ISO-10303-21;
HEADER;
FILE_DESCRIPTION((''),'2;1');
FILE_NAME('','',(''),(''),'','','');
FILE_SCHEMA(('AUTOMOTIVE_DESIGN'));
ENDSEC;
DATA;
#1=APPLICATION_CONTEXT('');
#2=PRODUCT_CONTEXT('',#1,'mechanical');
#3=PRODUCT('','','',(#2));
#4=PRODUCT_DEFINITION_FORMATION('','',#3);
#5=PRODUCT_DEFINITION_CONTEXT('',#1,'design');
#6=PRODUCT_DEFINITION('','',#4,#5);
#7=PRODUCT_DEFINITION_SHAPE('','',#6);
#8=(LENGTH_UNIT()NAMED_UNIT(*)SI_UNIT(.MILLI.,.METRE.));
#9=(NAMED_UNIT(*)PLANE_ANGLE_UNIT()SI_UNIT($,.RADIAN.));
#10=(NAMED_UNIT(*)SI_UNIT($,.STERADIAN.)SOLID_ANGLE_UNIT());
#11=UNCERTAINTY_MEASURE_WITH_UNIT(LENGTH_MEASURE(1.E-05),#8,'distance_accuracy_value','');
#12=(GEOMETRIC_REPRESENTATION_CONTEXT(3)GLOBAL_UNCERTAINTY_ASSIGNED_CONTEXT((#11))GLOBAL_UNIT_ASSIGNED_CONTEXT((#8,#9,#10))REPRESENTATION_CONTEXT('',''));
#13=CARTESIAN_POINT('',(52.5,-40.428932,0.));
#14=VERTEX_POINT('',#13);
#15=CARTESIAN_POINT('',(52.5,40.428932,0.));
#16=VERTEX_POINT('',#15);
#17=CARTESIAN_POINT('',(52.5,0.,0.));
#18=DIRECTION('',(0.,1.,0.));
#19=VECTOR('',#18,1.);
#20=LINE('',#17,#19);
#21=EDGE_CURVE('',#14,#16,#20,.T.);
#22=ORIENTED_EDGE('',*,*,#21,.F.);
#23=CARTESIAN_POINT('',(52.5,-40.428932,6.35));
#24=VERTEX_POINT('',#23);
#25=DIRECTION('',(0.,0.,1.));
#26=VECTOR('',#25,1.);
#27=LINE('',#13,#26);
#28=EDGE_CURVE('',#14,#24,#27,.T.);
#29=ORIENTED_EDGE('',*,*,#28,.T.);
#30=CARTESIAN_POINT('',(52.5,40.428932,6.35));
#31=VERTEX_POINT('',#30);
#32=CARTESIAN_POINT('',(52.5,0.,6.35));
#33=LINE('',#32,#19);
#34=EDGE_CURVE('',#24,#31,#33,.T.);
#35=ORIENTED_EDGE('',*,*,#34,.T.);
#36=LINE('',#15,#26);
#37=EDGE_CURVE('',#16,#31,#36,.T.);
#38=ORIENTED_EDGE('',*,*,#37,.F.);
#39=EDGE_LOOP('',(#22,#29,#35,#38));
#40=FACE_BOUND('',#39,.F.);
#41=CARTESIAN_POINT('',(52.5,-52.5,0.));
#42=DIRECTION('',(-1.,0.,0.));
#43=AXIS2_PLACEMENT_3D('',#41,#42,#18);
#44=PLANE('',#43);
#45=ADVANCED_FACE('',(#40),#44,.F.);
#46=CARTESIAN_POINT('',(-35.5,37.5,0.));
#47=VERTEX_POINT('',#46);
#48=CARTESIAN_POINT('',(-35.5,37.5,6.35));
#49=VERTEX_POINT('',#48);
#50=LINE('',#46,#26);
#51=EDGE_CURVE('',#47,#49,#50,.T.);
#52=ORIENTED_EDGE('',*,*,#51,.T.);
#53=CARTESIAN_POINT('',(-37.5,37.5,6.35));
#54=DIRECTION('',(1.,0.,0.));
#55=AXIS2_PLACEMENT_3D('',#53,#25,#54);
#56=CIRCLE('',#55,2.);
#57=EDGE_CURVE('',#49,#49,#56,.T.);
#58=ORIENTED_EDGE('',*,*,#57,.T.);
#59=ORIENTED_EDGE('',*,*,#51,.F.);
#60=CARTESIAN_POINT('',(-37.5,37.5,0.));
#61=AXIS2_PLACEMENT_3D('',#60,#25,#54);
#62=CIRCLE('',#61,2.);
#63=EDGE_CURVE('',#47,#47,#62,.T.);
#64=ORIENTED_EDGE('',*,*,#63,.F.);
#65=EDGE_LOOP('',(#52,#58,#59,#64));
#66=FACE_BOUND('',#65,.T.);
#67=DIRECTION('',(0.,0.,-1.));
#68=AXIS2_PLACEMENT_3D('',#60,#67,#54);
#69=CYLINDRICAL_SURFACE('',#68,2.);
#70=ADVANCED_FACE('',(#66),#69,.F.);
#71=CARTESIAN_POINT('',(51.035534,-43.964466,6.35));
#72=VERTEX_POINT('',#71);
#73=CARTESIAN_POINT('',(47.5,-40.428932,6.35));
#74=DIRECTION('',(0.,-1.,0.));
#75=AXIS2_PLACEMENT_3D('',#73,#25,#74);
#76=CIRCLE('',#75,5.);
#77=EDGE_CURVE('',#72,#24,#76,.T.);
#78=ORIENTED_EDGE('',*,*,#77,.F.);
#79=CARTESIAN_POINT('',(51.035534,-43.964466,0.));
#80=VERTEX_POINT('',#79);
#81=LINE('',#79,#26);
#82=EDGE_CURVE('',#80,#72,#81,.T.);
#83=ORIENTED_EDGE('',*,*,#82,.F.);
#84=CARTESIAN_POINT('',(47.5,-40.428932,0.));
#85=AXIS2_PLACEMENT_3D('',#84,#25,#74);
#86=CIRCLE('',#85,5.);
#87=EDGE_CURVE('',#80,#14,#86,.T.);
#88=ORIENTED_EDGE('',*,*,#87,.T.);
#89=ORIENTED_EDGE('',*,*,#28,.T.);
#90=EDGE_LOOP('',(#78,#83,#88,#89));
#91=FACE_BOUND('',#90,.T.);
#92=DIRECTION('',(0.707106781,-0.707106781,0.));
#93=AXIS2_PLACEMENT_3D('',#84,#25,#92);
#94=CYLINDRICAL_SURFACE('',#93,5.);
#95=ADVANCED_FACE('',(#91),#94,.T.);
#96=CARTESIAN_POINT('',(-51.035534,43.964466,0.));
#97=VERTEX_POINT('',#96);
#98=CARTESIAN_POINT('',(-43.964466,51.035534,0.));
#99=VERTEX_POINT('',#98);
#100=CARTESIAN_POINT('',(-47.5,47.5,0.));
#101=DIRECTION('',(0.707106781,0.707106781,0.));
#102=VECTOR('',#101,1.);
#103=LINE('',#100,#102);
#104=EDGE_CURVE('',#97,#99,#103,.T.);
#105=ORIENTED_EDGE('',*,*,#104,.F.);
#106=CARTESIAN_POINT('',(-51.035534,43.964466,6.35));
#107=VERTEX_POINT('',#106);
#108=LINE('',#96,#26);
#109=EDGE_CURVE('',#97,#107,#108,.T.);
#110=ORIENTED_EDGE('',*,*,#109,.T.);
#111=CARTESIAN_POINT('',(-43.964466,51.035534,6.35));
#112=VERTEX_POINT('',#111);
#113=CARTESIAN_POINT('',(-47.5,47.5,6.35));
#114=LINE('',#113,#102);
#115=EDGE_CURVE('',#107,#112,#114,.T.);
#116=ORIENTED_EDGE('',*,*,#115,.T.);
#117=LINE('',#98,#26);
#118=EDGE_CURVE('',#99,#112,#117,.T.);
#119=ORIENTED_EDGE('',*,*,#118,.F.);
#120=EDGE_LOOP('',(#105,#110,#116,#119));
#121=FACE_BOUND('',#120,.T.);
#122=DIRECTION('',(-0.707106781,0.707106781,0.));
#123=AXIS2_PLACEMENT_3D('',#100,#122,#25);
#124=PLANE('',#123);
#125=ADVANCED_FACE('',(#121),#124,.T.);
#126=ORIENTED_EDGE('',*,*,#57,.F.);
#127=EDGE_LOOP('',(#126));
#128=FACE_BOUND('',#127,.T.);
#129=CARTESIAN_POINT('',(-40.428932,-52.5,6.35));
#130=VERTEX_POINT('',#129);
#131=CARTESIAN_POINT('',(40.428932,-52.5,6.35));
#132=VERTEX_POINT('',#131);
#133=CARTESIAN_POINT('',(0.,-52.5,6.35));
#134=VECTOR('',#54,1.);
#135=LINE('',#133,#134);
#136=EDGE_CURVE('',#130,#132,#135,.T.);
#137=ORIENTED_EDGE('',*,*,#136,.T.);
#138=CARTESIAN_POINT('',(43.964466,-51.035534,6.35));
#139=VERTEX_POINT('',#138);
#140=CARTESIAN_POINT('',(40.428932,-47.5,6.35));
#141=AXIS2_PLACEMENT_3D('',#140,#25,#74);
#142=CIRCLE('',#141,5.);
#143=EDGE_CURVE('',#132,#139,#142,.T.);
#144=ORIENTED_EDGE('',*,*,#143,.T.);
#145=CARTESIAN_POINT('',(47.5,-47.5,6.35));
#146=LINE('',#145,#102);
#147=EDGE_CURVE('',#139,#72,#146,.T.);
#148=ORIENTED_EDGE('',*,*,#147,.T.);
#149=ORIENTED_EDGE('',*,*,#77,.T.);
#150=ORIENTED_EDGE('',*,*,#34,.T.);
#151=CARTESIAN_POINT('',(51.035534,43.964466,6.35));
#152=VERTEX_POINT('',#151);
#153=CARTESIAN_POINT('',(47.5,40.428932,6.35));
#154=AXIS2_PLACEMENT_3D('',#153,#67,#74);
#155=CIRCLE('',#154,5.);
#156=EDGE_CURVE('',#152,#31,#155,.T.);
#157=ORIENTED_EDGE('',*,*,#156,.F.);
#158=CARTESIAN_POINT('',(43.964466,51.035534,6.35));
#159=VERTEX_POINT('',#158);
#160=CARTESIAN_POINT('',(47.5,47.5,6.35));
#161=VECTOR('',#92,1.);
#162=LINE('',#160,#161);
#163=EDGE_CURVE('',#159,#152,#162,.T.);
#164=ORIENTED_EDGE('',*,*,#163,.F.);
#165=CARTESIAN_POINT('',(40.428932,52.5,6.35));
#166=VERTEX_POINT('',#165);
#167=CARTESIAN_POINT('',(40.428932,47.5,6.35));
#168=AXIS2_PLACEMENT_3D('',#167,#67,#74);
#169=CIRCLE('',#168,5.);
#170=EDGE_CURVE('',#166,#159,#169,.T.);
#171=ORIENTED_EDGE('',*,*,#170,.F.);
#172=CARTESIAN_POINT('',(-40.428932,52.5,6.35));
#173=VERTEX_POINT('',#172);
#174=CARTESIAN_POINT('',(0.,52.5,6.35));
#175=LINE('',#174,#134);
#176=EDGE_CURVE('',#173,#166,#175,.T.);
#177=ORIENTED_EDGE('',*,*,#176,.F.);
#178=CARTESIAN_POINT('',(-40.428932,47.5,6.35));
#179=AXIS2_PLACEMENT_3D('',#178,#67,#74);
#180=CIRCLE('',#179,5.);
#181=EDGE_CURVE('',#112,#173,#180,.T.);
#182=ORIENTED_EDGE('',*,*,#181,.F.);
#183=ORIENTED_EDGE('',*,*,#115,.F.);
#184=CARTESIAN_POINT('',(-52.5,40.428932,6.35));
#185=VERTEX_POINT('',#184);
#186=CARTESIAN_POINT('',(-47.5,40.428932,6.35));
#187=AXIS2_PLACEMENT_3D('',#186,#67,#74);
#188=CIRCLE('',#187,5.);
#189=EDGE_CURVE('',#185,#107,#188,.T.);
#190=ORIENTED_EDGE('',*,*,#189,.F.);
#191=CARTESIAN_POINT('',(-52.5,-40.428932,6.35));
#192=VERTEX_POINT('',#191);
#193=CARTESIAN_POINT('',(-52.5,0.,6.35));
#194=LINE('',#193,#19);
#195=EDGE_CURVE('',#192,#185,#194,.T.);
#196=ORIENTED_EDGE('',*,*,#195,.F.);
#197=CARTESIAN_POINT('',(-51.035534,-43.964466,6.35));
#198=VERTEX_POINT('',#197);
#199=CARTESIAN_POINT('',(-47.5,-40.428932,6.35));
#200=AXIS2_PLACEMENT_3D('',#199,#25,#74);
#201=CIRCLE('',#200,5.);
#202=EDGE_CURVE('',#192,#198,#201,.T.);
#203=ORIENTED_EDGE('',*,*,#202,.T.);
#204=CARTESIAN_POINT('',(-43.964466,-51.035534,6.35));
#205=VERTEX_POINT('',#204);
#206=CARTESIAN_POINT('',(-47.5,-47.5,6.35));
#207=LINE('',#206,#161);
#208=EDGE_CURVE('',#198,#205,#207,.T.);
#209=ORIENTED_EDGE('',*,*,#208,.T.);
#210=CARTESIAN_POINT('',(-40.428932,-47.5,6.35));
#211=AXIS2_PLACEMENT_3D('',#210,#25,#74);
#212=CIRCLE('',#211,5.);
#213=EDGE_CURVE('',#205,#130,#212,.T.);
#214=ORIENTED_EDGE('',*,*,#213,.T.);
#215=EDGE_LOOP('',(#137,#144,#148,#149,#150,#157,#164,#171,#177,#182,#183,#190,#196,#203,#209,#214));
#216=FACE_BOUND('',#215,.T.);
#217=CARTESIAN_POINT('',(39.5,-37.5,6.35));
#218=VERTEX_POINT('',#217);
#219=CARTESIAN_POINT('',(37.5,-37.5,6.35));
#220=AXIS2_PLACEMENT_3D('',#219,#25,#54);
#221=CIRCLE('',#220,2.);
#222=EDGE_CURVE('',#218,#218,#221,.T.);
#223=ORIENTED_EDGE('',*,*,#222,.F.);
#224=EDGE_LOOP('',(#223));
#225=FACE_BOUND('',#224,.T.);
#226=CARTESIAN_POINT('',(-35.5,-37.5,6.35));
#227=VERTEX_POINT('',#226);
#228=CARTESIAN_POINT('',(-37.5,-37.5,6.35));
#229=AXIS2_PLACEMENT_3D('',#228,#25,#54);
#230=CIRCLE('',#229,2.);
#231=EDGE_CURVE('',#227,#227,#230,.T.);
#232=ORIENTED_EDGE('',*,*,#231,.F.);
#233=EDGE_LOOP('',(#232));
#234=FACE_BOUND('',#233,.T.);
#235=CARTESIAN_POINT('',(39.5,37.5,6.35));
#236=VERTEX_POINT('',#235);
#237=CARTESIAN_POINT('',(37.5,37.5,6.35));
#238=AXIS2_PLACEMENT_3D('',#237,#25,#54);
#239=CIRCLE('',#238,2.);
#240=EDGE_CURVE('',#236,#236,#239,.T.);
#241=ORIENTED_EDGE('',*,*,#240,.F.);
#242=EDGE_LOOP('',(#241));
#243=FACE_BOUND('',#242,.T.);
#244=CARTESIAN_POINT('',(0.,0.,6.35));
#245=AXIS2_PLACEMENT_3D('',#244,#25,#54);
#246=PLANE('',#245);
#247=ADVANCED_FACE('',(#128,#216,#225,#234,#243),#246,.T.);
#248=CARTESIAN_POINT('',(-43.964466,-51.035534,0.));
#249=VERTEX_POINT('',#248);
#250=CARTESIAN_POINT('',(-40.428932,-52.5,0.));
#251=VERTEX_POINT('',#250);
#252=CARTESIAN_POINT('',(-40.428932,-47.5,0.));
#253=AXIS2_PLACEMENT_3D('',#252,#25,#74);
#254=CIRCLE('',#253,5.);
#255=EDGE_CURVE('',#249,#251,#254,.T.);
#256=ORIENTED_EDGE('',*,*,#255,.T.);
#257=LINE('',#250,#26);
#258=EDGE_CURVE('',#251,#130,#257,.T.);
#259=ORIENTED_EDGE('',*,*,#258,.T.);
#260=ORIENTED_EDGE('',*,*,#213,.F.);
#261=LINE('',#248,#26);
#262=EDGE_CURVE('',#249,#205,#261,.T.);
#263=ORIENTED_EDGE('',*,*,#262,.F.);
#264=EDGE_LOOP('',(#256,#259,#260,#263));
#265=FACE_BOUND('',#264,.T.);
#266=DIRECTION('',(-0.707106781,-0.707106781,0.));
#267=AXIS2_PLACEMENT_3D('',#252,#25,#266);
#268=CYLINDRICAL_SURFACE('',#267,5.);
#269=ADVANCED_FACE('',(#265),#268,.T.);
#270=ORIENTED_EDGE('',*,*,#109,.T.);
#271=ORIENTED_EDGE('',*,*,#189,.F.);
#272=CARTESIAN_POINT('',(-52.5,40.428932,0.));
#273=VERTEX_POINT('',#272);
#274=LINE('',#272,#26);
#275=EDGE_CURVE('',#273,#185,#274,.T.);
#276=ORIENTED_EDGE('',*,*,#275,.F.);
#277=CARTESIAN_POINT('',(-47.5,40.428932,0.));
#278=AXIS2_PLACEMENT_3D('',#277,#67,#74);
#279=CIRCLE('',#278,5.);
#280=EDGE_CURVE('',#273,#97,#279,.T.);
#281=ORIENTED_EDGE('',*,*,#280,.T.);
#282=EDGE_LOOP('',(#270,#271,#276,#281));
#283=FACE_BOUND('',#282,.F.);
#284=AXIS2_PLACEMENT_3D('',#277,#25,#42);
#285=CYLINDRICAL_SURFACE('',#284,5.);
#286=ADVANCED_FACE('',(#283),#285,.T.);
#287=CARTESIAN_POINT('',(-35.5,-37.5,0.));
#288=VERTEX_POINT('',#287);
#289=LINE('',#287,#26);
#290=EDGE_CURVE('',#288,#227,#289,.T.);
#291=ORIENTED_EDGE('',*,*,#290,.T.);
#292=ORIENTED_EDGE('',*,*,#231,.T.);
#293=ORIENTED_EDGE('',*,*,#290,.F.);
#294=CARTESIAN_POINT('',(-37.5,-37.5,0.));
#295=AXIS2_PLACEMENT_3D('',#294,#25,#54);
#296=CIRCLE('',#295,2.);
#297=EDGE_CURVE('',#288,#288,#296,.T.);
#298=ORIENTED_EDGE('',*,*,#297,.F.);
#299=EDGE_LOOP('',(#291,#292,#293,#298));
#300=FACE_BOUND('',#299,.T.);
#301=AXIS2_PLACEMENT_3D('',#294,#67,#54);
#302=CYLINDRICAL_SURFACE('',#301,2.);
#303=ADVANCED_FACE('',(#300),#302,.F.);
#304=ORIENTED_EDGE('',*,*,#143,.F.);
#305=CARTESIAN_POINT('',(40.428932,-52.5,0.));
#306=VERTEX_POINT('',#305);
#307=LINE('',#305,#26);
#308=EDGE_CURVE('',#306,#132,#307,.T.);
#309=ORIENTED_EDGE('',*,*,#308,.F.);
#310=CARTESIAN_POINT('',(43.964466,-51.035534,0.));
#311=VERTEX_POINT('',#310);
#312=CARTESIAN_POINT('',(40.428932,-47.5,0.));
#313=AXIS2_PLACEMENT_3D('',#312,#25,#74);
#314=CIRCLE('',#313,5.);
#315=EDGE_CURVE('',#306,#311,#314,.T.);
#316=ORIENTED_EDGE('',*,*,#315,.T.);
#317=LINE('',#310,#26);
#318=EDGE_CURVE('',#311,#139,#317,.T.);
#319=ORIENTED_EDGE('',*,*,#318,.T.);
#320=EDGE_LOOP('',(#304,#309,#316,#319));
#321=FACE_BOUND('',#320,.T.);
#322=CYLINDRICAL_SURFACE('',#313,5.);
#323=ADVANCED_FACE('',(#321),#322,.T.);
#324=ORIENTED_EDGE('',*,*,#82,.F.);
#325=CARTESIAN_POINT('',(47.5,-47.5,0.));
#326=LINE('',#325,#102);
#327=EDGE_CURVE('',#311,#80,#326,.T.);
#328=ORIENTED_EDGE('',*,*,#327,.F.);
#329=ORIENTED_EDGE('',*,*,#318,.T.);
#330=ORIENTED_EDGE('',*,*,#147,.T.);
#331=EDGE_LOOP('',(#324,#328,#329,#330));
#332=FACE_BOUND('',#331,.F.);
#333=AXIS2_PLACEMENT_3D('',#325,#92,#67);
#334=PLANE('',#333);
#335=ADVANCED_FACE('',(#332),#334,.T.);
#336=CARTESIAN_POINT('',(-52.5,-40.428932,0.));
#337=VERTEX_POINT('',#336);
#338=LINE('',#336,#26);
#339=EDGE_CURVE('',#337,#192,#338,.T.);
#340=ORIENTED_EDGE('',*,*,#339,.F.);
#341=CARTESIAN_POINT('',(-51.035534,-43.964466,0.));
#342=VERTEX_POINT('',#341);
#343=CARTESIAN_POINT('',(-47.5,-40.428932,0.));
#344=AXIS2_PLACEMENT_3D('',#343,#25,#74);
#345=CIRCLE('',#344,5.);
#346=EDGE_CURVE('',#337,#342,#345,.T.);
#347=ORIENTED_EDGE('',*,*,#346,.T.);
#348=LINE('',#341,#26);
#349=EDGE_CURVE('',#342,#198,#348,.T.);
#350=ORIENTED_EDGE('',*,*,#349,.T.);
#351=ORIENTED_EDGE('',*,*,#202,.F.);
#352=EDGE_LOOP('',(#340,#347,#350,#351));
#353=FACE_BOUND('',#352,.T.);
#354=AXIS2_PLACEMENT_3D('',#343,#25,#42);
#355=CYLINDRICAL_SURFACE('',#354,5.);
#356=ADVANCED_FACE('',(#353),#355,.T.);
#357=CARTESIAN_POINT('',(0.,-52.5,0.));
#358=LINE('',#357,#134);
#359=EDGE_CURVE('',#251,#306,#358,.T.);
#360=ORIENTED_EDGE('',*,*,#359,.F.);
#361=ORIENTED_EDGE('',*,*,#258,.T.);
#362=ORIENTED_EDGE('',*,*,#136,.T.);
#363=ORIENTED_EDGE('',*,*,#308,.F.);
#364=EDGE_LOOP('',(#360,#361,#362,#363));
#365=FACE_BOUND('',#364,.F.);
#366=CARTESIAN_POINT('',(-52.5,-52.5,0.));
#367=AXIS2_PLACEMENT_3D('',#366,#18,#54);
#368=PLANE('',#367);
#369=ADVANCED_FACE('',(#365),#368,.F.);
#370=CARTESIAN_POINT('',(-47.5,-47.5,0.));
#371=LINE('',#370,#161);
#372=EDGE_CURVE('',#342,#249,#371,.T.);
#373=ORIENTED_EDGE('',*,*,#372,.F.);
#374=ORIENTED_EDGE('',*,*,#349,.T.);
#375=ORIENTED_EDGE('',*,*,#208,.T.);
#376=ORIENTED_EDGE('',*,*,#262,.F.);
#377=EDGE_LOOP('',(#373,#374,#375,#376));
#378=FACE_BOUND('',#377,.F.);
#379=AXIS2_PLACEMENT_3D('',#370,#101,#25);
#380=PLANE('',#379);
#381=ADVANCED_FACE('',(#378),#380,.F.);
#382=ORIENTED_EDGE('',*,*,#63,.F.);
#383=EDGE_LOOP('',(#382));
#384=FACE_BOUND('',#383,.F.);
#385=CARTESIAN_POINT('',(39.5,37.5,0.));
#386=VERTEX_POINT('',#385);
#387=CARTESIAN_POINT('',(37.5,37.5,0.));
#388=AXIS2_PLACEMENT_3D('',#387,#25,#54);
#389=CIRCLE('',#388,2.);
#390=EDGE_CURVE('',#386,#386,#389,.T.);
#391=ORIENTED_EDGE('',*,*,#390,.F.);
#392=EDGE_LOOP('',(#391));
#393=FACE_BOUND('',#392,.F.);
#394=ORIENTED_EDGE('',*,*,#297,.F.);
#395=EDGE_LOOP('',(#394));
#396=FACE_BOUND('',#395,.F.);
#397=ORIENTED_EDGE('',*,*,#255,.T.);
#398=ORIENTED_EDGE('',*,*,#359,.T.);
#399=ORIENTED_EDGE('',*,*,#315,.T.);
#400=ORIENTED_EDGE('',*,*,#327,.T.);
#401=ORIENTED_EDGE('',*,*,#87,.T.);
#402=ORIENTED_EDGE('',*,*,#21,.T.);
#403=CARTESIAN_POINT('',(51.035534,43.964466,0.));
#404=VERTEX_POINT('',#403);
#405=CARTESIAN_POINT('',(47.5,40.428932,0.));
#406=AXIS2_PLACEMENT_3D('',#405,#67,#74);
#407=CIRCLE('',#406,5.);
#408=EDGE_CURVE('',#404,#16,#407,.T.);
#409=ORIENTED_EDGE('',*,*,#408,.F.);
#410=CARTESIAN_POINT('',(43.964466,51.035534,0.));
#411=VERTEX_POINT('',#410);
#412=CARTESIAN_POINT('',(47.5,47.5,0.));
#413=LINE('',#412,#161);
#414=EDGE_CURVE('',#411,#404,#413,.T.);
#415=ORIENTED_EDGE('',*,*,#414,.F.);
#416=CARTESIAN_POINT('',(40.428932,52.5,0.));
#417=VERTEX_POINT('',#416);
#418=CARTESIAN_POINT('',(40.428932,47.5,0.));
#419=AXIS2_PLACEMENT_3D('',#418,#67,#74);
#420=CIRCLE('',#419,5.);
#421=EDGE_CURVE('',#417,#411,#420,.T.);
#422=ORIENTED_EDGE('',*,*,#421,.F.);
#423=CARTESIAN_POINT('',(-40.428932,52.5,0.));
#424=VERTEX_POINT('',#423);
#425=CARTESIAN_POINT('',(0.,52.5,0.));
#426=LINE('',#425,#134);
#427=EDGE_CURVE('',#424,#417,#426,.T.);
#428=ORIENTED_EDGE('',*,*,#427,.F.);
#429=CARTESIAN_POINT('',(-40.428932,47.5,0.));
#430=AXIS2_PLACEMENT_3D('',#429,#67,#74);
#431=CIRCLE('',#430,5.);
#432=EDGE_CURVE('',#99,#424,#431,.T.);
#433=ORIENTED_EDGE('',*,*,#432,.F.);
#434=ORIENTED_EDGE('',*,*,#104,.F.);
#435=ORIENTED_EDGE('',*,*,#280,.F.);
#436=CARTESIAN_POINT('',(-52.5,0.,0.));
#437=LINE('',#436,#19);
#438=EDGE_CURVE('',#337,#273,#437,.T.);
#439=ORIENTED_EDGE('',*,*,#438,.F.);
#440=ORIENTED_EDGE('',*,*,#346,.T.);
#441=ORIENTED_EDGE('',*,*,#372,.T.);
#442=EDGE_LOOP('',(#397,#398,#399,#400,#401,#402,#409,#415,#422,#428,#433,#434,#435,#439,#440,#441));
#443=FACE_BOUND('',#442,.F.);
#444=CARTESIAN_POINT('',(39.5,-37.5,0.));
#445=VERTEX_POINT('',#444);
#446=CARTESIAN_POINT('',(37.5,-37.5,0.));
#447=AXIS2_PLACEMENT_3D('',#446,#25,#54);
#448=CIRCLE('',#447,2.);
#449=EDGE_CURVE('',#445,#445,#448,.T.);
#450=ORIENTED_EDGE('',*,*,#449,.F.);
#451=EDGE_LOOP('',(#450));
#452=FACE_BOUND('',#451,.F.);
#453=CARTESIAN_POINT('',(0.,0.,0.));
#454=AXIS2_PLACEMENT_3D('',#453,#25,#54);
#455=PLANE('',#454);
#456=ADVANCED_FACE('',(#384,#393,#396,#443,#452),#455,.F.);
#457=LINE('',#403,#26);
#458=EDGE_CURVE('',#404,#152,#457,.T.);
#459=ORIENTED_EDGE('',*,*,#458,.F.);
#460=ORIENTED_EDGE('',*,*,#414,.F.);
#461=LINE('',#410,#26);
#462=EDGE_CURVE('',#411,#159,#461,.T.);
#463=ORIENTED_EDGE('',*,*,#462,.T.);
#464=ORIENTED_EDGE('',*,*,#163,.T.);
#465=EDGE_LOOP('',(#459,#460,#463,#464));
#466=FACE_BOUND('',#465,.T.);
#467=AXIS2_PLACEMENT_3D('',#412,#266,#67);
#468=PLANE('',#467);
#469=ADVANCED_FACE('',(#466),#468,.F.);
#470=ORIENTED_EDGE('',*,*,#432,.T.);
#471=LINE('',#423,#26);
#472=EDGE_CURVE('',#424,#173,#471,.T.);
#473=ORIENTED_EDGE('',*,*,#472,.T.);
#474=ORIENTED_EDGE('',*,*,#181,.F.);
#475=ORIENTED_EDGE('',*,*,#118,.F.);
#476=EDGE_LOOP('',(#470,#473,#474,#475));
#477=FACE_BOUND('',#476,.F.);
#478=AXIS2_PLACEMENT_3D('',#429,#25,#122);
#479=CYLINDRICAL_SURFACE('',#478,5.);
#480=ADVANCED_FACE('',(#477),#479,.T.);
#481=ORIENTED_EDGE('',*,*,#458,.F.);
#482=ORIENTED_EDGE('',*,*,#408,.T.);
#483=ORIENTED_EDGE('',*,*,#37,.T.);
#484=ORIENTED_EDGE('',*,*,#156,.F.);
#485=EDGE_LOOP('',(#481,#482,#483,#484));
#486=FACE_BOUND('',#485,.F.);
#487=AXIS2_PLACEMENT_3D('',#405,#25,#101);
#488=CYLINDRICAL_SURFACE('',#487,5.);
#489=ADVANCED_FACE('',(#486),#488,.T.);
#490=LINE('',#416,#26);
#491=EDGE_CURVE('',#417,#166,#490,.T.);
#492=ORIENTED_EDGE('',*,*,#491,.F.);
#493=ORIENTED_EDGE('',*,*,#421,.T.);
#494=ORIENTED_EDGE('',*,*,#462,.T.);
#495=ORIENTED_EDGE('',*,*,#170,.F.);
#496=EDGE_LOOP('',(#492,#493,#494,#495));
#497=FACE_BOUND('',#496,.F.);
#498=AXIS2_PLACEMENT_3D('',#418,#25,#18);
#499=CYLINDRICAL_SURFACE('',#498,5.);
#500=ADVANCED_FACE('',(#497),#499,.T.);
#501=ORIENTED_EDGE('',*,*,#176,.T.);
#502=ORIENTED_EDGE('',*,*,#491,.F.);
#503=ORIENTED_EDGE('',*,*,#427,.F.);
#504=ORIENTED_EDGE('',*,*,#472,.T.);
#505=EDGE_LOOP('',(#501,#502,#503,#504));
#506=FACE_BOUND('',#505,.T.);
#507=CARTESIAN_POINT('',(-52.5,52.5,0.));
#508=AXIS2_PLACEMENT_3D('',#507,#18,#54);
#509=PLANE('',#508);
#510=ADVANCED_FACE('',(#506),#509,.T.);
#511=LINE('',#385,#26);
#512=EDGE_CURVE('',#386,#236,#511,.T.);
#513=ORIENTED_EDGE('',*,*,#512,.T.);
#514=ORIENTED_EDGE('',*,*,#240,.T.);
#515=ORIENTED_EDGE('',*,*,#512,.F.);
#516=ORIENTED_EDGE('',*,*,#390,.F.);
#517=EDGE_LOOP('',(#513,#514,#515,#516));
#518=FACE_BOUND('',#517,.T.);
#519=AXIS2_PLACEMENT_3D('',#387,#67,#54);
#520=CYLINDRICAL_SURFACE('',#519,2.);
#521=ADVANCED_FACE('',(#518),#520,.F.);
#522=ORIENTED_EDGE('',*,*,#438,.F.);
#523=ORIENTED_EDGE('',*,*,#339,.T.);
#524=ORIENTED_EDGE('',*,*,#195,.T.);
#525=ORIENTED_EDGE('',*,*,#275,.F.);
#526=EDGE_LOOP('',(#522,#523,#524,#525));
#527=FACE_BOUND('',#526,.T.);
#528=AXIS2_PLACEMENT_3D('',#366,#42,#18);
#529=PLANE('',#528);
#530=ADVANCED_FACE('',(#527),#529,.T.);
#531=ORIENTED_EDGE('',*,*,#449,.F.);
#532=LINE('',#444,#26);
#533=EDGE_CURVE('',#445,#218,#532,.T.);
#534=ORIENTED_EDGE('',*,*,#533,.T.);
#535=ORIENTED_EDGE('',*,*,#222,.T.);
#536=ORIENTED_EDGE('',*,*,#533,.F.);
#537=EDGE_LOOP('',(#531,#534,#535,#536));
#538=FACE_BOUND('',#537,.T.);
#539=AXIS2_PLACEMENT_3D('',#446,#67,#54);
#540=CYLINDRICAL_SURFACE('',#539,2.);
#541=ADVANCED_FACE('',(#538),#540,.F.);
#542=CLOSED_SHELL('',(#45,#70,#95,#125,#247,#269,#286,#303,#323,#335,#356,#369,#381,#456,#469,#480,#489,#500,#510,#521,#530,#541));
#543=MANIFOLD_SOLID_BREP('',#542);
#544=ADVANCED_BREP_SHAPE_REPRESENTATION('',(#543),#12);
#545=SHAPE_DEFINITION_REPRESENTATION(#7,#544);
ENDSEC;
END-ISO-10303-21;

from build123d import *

# Parameters (mm, degrees)
F0_W     = 105
F0_H     = 105
F0_R     = 2
F1_DEPTH = 6.35
F2_SIZE  = 10
F3_R     = 5


# Not quite as in the source:
# - a length typed as a fraction of an inch, garbled in the dataset ("3 / 203.2 mm" for 3/8 in), is restored


with BuildPart() as f1:
    # F0 (on Top) → F1 (new body)
    with BuildSketch(Plane.XY):
        Rectangle(F0_W, F0_H)
        with Locations((-37.5, -37.5)):
            Circle(F0_R, mode=Mode.SUBTRACT)
        with Locations((37.5, -37.5)):
            Circle(F0_R, mode=Mode.SUBTRACT)
        with Locations((-37.5, 37.5)):
            Circle(F0_R, mode=Mode.SUBTRACT)
        with Locations((37.5, 37.5)):
            Circle(F0_R, mode=Mode.SUBTRACT)
    extrude(amount=F1_DEPTH)

    # F2
    f2_edges = [f1.edges().sort_by_distance(p)[0] for p in [
        (-52.5, -52.5, 3.175),
        (52.5, -52.5, 3.175),
        (52.5, 52.5, 3.175),
        (-52.5, 52.5, 3.175),
    ]]
    chamfer(f2_edges, length=F2_SIZE)

    # F3
    f3_edges = [f1.edges().sort_by_distance(p)[0] for p in [
        (52.5, 42.5, 3.175),
        (42.5, 52.5, 3.175),
        (-42.5, 52.5, 3.175),
        (-52.5, 42.5, 3.175),
        (-52.5, -42.5, 3.175),
        (-42.5, -52.5, 3.175),
        (42.5, -52.5, 3.175),
        (52.5, -42.5, 3.175),
    ]]
    fillet(f3_edges, radius=F3_R)


solid = f1.part
